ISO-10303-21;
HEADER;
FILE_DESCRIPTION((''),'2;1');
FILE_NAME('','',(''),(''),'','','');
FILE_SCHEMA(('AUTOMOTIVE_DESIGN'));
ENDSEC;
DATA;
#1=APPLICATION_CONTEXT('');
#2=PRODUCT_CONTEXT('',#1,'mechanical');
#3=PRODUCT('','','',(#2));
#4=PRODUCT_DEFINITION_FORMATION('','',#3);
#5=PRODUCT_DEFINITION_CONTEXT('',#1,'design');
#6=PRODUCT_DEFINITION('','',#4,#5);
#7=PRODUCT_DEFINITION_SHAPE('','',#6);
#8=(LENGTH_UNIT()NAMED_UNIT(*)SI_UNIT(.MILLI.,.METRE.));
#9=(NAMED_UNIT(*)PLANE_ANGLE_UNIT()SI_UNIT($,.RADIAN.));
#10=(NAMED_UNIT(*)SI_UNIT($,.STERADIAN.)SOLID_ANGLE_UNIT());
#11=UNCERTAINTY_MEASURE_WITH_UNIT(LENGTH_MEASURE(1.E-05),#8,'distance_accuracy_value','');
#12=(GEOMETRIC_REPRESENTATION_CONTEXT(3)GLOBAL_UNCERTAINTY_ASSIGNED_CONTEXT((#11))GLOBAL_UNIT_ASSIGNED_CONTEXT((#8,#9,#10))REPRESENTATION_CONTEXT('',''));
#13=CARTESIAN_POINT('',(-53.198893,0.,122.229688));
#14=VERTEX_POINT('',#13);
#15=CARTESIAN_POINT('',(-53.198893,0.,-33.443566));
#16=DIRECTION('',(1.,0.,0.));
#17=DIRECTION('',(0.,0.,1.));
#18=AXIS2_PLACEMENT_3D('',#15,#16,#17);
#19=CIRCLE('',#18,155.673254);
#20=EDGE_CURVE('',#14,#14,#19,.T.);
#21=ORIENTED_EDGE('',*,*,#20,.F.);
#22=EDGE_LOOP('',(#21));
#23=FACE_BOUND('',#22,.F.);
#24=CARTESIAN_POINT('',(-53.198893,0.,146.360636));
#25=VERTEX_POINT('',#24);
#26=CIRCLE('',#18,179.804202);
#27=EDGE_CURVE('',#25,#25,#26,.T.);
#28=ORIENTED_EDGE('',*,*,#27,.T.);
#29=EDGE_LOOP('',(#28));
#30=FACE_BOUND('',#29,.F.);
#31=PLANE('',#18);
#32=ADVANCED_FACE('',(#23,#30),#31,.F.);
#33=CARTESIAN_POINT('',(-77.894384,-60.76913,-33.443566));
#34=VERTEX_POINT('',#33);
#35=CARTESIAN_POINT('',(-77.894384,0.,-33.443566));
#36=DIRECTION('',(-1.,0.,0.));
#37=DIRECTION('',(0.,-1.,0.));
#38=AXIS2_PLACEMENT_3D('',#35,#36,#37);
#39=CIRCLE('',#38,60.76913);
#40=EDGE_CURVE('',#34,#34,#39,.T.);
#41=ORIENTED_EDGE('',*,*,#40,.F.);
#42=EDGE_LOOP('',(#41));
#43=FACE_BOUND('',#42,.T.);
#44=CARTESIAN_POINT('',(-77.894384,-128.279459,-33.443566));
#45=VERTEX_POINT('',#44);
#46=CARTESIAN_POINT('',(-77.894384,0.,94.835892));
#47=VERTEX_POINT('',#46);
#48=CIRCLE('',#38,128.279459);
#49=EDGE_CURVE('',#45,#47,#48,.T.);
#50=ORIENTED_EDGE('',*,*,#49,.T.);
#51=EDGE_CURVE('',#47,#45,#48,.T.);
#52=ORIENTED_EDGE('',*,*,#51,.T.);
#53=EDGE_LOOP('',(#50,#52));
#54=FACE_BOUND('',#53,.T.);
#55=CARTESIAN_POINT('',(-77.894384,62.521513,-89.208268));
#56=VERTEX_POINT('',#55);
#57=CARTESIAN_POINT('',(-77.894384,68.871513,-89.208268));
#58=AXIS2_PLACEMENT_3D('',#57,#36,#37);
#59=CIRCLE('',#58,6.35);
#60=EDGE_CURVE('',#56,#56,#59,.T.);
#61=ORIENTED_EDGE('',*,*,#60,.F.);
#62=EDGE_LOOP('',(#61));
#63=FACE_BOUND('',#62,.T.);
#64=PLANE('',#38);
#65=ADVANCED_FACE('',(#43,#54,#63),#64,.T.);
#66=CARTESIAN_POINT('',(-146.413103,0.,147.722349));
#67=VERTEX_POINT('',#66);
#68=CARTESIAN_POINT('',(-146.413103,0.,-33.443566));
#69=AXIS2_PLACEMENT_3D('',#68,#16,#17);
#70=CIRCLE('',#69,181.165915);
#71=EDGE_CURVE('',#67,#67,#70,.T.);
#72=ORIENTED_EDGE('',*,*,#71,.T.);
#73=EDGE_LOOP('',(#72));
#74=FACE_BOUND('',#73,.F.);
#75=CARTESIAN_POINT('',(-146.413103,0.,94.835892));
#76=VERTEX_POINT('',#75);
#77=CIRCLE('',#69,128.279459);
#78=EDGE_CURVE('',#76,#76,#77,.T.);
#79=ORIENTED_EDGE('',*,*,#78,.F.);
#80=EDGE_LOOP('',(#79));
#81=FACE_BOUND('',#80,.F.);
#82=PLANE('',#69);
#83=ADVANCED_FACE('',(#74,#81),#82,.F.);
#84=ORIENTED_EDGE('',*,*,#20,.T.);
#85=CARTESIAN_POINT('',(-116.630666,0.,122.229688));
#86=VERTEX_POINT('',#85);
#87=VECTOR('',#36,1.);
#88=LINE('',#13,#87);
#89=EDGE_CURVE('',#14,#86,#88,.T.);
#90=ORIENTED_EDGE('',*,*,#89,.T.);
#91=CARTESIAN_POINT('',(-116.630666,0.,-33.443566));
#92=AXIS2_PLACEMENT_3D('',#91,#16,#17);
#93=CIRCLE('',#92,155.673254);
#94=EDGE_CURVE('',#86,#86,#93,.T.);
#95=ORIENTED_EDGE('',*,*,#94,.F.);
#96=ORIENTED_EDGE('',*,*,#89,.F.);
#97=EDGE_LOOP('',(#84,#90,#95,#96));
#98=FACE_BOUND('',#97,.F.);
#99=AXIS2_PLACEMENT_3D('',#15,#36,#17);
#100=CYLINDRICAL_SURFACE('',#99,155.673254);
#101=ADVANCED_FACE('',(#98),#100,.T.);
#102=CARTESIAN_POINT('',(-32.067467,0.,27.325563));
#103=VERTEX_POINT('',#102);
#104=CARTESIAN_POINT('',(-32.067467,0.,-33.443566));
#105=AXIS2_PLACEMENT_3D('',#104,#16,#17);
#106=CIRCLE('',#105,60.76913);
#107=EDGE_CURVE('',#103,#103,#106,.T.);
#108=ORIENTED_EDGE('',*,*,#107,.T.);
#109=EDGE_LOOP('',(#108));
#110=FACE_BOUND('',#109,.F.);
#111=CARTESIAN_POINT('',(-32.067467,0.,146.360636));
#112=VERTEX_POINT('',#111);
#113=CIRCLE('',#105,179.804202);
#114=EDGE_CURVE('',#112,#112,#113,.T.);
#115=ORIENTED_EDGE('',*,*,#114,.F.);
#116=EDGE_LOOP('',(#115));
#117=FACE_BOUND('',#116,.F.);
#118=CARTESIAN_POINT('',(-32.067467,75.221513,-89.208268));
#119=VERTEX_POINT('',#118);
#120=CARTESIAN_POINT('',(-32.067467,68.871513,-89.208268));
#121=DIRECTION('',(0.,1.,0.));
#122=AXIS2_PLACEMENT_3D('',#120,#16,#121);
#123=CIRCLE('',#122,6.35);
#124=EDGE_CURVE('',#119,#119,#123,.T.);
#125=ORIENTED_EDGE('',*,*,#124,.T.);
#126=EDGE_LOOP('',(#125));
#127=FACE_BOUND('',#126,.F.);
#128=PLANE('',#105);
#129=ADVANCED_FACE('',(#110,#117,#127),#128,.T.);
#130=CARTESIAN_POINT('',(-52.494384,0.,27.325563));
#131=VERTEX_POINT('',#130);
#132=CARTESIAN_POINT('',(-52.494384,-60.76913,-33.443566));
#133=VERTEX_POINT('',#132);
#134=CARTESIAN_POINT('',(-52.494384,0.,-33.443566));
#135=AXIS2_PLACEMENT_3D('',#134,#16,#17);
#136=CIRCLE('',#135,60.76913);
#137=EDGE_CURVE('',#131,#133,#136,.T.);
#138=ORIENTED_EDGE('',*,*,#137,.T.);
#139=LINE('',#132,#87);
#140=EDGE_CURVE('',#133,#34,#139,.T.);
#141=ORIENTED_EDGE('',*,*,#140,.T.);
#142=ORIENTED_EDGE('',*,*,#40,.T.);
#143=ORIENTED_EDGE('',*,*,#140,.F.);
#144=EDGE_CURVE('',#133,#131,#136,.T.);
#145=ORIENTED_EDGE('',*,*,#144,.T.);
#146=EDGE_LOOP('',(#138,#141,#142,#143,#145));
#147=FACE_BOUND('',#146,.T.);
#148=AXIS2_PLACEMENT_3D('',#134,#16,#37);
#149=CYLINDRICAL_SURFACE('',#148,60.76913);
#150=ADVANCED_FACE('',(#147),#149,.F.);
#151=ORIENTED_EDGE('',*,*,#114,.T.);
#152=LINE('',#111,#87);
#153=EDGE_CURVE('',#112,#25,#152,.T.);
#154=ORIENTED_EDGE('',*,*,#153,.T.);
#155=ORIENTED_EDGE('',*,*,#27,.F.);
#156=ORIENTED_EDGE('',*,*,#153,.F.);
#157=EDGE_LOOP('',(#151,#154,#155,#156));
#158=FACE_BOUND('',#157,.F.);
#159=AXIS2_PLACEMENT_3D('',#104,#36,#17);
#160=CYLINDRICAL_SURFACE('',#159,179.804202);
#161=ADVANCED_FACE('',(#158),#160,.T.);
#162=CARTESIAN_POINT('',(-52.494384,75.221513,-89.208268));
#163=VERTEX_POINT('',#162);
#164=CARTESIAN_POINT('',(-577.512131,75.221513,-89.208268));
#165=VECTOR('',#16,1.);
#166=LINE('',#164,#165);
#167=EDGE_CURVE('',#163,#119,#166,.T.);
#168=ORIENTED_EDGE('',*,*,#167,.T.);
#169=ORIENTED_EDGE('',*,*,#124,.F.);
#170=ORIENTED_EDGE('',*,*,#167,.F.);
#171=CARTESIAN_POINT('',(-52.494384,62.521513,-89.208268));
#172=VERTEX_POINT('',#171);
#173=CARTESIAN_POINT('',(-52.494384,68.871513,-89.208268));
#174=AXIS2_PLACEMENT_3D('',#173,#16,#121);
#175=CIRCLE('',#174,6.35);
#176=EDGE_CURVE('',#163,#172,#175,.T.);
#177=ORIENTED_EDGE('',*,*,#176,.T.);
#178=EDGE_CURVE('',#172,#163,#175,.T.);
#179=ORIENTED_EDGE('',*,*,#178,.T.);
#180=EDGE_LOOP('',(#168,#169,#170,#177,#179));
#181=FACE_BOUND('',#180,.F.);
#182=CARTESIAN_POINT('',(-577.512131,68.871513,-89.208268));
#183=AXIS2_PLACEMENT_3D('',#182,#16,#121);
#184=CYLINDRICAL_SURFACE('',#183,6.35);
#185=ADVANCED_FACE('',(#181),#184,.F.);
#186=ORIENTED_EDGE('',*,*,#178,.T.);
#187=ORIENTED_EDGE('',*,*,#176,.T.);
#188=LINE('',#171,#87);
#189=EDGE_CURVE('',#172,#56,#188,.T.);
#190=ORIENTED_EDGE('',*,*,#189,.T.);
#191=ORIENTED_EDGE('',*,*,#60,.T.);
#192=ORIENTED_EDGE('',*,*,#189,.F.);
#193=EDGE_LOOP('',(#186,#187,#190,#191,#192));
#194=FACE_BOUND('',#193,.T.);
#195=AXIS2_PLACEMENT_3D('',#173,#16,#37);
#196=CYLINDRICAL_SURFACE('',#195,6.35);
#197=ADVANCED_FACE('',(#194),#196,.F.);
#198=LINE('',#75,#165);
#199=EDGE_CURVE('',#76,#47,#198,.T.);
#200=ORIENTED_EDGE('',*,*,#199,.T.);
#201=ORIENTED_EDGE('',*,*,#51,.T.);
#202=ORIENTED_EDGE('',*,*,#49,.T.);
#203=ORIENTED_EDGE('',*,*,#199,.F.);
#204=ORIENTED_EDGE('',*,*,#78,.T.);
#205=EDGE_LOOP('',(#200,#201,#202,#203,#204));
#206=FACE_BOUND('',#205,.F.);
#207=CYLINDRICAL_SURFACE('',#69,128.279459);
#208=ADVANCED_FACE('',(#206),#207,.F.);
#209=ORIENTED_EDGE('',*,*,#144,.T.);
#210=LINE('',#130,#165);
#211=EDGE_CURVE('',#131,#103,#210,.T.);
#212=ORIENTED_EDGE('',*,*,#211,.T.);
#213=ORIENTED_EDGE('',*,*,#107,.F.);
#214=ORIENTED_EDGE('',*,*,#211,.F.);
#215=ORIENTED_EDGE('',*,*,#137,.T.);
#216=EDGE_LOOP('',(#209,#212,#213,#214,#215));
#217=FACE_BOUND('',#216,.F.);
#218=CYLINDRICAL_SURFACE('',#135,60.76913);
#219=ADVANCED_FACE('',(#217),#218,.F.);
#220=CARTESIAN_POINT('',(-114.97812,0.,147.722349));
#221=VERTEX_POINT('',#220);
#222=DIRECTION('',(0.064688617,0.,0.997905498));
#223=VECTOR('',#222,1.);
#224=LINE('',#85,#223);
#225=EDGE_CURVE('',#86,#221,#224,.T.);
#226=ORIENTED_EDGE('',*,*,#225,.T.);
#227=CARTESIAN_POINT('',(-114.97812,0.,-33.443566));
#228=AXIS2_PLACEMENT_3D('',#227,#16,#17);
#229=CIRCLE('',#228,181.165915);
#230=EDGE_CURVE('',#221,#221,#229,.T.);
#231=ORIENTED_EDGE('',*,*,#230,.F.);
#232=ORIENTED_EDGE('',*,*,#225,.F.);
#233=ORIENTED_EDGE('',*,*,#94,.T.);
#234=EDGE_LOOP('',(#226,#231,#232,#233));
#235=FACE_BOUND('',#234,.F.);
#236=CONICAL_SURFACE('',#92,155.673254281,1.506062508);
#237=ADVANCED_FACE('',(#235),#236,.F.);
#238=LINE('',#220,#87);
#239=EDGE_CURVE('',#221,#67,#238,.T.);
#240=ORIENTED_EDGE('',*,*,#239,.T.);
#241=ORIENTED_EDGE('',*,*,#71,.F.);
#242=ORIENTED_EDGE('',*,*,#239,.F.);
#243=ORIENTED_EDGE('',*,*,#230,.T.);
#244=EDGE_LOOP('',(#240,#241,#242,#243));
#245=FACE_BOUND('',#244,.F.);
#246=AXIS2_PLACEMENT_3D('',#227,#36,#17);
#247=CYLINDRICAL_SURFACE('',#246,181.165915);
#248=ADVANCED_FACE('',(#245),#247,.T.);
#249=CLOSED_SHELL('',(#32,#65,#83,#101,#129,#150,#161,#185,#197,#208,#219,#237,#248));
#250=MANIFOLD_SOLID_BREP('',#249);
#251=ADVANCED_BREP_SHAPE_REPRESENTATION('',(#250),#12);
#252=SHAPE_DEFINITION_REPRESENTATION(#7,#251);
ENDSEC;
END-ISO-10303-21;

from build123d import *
from build123d import SkipClean  # not in build123d's __all__

# Parameters (mm, degrees)
F4_D     = 12.7
F5_R     = 128.2794587314
F5_R_2   = 6.35
F5_R_3   = 60.7691295445
F6_DEPTH = 25.4


with BuildPart() as f2:
    # F0 (on Front) → F2 (revolve)
    with BuildSketch(Plane.XZ):
        Polygon((-52.4943843484, 27.3255631328), (-32.0674665272, 27.3255631328), (-32.0674665272, 113.4814321995), (-32.0674665272, 146.3606357574), (-53.1988926232, 146.3606357574), (-53.1988926232, 122.2296878695), (-116.6306659579, 122.2296878695), (-114.9781197309, 147.7223485708), (-146.413102746, 147.7223485708), (-146.413102746, 94.8358923197), (-52.4943843484, 94.8358923197), align=None)
    revolve(axis=Axis((-79.9387739971, 0, -33.4435664117), (1, 0, 0)))

    # F4 (through all)
    with Locations(Plane(origin=(-52.4943843484, 0, 0), x_dir=(0, -1, 0), z_dir=(-1, 0, 0))):
        with Locations((-68.8715130091, -89.2082676291)):
            Hole(F4_D / 2)

    # F5 (on face) → F6 (join)
    with BuildSketch(Plane(origin=(-52.4943843484, 0, 0), x_dir=(0, -1, 0), z_dir=(-1, 0, 0))):
        with Locations((0, -33.4435664117)):
            Circle(F5_R)
        with Locations((-68.8715130091, -89.2082676291)):
            Circle(F5_R_2, mode=Mode.SUBTRACT)
        with Locations((0, -33.4435664117)):
            Circle(F5_R_3, mode=Mode.SUBTRACT)
    with SkipClean():  # cleaning this boolean's faces spoils the solid; the shape is the same uncleaned
        extrude(amount=F6_DEPTH)


solid = f2.part
